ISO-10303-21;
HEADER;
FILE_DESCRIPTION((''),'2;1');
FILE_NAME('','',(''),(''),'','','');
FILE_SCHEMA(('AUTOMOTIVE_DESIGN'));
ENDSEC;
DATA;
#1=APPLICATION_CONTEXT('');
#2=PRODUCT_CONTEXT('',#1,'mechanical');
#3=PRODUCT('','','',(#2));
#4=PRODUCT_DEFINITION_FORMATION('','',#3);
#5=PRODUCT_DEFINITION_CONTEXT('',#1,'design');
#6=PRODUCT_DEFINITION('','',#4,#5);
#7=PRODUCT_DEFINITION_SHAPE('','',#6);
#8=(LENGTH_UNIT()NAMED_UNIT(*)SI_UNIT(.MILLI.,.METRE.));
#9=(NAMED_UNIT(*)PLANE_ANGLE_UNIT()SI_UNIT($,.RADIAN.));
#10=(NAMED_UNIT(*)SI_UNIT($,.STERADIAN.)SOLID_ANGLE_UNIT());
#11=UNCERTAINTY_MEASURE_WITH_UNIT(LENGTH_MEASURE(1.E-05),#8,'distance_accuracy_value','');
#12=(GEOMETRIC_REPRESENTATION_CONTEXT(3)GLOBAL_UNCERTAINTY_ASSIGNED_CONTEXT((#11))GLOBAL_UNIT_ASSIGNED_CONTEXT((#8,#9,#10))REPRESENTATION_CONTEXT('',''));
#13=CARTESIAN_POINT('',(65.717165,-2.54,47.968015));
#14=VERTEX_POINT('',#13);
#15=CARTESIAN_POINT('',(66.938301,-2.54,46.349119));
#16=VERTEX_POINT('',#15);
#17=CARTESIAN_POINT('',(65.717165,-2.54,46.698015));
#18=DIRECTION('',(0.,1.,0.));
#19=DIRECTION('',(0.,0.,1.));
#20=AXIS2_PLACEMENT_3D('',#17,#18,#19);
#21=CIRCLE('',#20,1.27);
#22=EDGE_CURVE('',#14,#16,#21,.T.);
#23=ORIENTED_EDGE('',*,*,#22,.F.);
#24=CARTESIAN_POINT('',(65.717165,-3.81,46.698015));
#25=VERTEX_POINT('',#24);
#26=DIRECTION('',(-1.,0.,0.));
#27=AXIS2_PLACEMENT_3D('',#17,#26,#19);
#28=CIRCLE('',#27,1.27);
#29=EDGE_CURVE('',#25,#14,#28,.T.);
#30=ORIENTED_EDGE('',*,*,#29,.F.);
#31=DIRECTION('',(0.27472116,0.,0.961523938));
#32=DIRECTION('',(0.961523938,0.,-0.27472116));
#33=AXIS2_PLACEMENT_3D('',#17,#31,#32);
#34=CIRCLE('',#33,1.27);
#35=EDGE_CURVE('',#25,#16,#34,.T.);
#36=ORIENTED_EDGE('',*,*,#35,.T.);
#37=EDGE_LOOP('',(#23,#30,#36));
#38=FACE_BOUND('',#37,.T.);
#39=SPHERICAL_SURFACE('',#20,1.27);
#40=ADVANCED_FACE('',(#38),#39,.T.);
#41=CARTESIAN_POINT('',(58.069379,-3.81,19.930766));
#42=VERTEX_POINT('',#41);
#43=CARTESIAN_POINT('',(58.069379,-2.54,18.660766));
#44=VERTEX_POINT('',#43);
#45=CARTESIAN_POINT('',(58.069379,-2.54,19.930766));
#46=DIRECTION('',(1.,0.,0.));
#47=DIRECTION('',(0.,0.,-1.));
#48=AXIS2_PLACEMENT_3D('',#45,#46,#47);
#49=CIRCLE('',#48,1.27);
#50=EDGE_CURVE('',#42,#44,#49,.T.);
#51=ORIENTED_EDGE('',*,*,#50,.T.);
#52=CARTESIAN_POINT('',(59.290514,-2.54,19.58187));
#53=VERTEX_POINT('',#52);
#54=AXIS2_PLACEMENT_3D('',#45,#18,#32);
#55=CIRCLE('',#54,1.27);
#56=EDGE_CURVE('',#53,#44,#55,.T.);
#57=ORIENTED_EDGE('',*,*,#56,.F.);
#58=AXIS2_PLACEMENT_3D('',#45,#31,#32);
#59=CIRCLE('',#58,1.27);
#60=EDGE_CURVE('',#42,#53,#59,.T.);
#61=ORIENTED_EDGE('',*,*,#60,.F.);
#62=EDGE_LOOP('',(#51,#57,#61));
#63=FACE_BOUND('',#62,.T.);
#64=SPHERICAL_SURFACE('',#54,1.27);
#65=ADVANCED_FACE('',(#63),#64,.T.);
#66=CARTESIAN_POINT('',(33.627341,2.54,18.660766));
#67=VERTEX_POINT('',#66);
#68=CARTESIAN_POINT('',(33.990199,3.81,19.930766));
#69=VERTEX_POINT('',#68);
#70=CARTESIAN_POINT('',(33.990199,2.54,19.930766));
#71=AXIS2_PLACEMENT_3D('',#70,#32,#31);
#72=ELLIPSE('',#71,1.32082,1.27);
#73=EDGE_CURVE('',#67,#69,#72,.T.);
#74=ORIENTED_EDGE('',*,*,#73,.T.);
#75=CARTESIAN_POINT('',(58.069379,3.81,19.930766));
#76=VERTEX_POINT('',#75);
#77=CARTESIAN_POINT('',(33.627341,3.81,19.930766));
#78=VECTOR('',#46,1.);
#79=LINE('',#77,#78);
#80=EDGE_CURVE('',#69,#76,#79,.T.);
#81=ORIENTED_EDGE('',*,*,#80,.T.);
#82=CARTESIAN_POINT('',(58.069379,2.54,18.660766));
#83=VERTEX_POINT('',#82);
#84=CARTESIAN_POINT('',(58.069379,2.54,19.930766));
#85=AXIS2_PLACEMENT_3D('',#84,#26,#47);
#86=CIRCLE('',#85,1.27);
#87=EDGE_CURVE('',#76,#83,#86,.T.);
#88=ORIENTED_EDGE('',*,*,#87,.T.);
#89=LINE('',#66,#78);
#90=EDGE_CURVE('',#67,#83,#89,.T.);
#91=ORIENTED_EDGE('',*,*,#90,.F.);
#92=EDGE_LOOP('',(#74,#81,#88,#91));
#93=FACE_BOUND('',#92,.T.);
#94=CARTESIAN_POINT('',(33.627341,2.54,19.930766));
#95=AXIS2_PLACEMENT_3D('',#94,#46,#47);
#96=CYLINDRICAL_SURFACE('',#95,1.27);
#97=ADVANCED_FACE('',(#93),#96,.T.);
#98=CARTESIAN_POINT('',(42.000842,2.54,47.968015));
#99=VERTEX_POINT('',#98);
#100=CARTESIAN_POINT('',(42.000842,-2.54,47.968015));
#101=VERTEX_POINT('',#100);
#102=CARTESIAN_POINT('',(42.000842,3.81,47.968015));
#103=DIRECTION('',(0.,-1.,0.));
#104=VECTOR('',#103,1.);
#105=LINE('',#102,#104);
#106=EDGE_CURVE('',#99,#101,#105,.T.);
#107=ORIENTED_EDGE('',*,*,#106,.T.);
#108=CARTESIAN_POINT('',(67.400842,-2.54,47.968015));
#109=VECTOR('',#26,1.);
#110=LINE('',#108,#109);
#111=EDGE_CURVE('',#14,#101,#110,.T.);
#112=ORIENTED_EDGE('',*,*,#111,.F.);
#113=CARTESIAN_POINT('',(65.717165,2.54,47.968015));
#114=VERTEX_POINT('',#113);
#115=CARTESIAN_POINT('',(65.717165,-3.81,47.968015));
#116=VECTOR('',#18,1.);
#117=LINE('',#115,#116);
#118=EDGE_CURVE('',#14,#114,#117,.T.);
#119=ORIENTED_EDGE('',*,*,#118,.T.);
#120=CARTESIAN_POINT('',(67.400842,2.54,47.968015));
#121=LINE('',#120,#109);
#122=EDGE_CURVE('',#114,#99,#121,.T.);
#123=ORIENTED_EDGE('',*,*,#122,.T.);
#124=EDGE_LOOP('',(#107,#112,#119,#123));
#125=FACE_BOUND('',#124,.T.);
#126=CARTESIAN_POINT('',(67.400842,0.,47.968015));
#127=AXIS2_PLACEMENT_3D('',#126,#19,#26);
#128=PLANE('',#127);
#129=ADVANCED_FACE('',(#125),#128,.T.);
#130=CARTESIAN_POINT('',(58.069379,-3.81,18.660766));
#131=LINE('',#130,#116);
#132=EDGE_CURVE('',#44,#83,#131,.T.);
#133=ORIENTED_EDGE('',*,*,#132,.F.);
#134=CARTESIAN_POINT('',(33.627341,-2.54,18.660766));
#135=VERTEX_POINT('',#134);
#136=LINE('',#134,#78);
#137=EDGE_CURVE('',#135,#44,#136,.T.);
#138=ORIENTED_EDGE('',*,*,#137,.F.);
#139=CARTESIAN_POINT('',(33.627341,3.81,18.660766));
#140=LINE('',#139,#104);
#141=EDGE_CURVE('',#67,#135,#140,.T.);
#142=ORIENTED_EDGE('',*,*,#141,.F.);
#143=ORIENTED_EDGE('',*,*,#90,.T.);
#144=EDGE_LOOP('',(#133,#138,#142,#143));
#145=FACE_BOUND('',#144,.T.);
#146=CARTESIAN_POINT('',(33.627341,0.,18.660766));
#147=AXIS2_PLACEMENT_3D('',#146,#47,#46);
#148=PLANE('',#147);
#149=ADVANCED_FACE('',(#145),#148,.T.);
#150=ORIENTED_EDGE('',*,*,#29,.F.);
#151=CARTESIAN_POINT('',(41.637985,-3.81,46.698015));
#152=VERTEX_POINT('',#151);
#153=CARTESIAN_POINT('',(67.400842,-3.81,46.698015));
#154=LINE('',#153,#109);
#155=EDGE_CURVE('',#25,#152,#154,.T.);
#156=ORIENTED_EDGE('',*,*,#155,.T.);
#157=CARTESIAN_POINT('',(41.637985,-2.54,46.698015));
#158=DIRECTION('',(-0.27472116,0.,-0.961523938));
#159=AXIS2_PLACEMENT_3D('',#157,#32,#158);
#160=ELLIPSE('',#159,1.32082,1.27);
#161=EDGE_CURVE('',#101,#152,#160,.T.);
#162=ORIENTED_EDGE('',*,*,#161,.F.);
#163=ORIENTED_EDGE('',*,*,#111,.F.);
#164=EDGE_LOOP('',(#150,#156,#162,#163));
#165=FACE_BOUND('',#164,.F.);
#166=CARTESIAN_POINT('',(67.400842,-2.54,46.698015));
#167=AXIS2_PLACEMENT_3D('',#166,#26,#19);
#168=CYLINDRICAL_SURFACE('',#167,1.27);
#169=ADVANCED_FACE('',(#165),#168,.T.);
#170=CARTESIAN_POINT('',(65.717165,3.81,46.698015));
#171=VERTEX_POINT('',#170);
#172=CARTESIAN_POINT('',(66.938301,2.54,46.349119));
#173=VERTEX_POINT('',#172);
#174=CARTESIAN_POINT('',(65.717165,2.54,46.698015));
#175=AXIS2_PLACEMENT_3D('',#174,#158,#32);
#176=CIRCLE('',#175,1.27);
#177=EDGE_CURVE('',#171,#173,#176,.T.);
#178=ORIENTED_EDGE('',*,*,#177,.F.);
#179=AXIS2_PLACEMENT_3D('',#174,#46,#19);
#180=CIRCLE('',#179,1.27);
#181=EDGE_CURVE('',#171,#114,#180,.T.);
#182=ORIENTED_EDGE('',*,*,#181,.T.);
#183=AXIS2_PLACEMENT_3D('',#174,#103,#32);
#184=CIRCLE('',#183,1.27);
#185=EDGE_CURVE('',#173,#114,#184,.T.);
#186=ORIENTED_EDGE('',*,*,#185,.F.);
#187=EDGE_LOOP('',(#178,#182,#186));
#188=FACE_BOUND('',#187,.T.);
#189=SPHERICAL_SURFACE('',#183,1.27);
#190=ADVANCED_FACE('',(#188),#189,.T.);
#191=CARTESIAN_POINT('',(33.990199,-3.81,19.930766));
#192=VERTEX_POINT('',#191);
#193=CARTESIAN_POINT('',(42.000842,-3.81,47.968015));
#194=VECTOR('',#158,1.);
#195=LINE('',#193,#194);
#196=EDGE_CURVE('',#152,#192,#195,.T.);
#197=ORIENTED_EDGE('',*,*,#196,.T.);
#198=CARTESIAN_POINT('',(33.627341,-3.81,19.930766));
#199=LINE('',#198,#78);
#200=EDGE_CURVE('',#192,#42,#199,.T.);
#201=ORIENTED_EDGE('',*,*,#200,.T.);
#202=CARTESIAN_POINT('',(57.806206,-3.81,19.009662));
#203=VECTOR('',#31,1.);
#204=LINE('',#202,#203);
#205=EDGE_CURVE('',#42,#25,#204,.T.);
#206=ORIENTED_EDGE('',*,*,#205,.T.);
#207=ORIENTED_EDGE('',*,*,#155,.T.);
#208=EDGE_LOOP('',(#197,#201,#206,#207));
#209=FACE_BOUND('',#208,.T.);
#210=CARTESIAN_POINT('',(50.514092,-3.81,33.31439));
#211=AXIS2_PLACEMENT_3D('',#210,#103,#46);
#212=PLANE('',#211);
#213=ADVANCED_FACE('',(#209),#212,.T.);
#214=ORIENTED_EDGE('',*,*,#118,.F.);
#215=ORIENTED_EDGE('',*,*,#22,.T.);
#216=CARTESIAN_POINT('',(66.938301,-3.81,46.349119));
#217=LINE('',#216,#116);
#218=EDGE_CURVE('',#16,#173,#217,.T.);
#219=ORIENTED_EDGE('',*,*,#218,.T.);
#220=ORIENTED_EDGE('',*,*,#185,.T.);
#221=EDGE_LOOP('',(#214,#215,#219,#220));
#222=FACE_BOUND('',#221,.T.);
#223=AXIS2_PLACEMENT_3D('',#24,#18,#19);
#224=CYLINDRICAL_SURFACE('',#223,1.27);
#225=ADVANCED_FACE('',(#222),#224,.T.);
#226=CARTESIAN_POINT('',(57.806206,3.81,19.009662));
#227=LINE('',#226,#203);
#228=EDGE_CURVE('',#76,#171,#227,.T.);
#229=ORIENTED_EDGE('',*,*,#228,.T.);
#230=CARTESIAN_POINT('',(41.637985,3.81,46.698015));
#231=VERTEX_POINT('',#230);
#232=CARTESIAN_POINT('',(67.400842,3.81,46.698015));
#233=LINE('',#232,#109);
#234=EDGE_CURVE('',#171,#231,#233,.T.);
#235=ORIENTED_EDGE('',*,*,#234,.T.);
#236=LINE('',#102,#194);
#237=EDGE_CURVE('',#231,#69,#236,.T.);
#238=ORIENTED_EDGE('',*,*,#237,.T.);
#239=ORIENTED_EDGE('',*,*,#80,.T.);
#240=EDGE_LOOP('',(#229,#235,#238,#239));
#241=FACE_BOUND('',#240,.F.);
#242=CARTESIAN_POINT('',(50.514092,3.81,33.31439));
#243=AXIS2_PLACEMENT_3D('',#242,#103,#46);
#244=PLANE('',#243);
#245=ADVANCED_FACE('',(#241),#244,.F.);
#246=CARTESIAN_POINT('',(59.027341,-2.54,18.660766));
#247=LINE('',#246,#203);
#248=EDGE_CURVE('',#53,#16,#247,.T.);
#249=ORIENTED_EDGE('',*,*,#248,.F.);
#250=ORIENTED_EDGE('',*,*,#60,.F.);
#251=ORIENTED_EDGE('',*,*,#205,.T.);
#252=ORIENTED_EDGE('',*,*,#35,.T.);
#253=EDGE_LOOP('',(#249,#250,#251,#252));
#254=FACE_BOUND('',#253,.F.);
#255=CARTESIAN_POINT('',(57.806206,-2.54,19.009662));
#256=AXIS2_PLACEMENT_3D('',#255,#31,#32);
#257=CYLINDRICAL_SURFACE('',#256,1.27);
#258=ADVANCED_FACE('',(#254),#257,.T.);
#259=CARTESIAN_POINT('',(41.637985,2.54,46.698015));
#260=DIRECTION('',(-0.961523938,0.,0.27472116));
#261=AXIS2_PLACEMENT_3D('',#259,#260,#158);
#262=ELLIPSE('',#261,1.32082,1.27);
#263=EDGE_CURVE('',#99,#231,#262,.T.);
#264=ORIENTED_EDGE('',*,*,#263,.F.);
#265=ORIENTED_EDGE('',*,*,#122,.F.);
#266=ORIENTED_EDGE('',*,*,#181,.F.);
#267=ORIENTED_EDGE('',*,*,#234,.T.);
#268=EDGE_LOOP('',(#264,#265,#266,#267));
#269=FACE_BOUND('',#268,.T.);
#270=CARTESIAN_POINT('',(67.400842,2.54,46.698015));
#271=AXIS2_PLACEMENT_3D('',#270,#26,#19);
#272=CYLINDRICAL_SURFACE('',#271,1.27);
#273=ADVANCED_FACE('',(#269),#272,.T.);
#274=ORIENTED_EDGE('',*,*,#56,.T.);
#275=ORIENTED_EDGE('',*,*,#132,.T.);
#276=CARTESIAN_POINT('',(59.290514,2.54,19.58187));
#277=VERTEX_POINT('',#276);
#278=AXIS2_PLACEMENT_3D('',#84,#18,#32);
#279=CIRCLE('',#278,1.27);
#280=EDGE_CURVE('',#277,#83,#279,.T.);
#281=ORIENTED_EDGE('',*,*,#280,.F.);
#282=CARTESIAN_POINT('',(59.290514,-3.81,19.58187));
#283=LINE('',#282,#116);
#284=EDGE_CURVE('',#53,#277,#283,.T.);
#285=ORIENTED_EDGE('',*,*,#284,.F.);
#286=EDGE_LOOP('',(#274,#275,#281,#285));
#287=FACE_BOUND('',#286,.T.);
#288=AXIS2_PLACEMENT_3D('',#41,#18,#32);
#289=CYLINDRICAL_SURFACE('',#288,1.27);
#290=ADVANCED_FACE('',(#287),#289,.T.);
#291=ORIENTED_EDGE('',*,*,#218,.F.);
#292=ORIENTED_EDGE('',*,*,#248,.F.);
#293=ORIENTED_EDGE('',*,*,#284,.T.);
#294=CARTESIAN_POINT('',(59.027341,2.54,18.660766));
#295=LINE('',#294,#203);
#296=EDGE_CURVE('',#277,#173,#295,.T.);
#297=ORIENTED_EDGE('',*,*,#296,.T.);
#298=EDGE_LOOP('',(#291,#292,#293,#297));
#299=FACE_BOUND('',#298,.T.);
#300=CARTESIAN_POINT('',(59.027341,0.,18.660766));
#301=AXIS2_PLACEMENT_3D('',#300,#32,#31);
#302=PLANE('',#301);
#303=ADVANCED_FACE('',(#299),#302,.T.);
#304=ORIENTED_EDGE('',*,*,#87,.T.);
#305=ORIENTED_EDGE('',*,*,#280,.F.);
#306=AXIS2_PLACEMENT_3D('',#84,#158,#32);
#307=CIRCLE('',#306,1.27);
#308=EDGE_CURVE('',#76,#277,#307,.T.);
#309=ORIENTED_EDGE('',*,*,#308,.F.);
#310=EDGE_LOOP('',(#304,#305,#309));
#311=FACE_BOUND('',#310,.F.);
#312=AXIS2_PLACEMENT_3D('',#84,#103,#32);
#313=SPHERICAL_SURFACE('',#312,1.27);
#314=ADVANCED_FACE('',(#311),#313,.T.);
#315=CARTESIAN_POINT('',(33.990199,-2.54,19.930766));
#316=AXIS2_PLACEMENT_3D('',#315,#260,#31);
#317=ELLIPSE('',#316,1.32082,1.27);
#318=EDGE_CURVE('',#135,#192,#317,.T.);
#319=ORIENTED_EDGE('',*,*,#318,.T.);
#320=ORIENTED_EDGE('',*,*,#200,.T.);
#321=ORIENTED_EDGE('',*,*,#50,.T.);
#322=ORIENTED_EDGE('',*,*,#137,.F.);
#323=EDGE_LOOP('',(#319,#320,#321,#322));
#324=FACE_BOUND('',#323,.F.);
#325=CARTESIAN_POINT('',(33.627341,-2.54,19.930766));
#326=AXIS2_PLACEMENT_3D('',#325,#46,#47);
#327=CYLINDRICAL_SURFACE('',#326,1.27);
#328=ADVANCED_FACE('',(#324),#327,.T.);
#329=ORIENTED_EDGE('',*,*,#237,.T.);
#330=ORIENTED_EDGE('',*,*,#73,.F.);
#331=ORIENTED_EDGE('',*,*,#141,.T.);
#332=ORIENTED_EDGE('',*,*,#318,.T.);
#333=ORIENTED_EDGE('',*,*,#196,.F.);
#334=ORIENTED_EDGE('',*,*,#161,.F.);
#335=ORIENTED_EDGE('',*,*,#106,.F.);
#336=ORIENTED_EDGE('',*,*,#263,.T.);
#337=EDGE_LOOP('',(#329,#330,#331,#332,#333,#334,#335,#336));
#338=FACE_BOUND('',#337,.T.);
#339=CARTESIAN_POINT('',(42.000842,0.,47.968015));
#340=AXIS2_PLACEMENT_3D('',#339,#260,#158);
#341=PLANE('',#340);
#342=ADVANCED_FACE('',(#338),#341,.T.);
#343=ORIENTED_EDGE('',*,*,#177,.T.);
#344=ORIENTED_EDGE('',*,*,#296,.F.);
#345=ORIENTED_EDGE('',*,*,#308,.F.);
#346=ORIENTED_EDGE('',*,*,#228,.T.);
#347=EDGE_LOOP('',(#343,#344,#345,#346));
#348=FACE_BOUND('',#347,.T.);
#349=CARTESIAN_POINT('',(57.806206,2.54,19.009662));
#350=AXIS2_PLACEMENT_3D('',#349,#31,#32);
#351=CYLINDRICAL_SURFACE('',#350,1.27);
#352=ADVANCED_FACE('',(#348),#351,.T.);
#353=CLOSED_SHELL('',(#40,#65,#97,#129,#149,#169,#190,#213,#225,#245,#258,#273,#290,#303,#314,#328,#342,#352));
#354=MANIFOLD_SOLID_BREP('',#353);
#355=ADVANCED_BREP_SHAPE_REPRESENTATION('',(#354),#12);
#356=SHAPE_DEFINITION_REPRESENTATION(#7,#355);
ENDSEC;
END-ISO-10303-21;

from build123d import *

# Parameters (mm, degrees)
F3_DEPTH = 3.81
F4_R     = 1.27


# Not quite as in the source:
# - the program builds the solid bodies; features that only make, move or delete a surface that nothing else refers to are left out


with BuildPart() as f3:
    # F2 (on Front) → F3 (new body, symmetric)
    with BuildSketch(Plane.XZ):
        Polygon((67.4008423153, 47.9680152879), (42.0008423153, 47.9680152879), (33.6273413479, 18.6607656464), (59.0273413479, 18.6607656464), align=None)
    extrude(amount=F3_DEPTH, both=True)

    # F4
    f4_edges = [f3.edges().sort_by_distance(p)[0] for p in [
        (54.700842, -3.81, 47.968015),
        (63.214092, -3.81, 33.31439),
        (46.327341, -3.81, 18.660766),
        (63.214092, 3.81, 33.31439),
        (54.700842, 3.81, 47.968015),
        (46.327341, 3.81, 18.660766),
        (67.400842, 0, 47.968015),
        (59.027341, 0, 18.660766),
    ]]
    fillet(f4_edges, radius=F4_R)


solid = f3.part
